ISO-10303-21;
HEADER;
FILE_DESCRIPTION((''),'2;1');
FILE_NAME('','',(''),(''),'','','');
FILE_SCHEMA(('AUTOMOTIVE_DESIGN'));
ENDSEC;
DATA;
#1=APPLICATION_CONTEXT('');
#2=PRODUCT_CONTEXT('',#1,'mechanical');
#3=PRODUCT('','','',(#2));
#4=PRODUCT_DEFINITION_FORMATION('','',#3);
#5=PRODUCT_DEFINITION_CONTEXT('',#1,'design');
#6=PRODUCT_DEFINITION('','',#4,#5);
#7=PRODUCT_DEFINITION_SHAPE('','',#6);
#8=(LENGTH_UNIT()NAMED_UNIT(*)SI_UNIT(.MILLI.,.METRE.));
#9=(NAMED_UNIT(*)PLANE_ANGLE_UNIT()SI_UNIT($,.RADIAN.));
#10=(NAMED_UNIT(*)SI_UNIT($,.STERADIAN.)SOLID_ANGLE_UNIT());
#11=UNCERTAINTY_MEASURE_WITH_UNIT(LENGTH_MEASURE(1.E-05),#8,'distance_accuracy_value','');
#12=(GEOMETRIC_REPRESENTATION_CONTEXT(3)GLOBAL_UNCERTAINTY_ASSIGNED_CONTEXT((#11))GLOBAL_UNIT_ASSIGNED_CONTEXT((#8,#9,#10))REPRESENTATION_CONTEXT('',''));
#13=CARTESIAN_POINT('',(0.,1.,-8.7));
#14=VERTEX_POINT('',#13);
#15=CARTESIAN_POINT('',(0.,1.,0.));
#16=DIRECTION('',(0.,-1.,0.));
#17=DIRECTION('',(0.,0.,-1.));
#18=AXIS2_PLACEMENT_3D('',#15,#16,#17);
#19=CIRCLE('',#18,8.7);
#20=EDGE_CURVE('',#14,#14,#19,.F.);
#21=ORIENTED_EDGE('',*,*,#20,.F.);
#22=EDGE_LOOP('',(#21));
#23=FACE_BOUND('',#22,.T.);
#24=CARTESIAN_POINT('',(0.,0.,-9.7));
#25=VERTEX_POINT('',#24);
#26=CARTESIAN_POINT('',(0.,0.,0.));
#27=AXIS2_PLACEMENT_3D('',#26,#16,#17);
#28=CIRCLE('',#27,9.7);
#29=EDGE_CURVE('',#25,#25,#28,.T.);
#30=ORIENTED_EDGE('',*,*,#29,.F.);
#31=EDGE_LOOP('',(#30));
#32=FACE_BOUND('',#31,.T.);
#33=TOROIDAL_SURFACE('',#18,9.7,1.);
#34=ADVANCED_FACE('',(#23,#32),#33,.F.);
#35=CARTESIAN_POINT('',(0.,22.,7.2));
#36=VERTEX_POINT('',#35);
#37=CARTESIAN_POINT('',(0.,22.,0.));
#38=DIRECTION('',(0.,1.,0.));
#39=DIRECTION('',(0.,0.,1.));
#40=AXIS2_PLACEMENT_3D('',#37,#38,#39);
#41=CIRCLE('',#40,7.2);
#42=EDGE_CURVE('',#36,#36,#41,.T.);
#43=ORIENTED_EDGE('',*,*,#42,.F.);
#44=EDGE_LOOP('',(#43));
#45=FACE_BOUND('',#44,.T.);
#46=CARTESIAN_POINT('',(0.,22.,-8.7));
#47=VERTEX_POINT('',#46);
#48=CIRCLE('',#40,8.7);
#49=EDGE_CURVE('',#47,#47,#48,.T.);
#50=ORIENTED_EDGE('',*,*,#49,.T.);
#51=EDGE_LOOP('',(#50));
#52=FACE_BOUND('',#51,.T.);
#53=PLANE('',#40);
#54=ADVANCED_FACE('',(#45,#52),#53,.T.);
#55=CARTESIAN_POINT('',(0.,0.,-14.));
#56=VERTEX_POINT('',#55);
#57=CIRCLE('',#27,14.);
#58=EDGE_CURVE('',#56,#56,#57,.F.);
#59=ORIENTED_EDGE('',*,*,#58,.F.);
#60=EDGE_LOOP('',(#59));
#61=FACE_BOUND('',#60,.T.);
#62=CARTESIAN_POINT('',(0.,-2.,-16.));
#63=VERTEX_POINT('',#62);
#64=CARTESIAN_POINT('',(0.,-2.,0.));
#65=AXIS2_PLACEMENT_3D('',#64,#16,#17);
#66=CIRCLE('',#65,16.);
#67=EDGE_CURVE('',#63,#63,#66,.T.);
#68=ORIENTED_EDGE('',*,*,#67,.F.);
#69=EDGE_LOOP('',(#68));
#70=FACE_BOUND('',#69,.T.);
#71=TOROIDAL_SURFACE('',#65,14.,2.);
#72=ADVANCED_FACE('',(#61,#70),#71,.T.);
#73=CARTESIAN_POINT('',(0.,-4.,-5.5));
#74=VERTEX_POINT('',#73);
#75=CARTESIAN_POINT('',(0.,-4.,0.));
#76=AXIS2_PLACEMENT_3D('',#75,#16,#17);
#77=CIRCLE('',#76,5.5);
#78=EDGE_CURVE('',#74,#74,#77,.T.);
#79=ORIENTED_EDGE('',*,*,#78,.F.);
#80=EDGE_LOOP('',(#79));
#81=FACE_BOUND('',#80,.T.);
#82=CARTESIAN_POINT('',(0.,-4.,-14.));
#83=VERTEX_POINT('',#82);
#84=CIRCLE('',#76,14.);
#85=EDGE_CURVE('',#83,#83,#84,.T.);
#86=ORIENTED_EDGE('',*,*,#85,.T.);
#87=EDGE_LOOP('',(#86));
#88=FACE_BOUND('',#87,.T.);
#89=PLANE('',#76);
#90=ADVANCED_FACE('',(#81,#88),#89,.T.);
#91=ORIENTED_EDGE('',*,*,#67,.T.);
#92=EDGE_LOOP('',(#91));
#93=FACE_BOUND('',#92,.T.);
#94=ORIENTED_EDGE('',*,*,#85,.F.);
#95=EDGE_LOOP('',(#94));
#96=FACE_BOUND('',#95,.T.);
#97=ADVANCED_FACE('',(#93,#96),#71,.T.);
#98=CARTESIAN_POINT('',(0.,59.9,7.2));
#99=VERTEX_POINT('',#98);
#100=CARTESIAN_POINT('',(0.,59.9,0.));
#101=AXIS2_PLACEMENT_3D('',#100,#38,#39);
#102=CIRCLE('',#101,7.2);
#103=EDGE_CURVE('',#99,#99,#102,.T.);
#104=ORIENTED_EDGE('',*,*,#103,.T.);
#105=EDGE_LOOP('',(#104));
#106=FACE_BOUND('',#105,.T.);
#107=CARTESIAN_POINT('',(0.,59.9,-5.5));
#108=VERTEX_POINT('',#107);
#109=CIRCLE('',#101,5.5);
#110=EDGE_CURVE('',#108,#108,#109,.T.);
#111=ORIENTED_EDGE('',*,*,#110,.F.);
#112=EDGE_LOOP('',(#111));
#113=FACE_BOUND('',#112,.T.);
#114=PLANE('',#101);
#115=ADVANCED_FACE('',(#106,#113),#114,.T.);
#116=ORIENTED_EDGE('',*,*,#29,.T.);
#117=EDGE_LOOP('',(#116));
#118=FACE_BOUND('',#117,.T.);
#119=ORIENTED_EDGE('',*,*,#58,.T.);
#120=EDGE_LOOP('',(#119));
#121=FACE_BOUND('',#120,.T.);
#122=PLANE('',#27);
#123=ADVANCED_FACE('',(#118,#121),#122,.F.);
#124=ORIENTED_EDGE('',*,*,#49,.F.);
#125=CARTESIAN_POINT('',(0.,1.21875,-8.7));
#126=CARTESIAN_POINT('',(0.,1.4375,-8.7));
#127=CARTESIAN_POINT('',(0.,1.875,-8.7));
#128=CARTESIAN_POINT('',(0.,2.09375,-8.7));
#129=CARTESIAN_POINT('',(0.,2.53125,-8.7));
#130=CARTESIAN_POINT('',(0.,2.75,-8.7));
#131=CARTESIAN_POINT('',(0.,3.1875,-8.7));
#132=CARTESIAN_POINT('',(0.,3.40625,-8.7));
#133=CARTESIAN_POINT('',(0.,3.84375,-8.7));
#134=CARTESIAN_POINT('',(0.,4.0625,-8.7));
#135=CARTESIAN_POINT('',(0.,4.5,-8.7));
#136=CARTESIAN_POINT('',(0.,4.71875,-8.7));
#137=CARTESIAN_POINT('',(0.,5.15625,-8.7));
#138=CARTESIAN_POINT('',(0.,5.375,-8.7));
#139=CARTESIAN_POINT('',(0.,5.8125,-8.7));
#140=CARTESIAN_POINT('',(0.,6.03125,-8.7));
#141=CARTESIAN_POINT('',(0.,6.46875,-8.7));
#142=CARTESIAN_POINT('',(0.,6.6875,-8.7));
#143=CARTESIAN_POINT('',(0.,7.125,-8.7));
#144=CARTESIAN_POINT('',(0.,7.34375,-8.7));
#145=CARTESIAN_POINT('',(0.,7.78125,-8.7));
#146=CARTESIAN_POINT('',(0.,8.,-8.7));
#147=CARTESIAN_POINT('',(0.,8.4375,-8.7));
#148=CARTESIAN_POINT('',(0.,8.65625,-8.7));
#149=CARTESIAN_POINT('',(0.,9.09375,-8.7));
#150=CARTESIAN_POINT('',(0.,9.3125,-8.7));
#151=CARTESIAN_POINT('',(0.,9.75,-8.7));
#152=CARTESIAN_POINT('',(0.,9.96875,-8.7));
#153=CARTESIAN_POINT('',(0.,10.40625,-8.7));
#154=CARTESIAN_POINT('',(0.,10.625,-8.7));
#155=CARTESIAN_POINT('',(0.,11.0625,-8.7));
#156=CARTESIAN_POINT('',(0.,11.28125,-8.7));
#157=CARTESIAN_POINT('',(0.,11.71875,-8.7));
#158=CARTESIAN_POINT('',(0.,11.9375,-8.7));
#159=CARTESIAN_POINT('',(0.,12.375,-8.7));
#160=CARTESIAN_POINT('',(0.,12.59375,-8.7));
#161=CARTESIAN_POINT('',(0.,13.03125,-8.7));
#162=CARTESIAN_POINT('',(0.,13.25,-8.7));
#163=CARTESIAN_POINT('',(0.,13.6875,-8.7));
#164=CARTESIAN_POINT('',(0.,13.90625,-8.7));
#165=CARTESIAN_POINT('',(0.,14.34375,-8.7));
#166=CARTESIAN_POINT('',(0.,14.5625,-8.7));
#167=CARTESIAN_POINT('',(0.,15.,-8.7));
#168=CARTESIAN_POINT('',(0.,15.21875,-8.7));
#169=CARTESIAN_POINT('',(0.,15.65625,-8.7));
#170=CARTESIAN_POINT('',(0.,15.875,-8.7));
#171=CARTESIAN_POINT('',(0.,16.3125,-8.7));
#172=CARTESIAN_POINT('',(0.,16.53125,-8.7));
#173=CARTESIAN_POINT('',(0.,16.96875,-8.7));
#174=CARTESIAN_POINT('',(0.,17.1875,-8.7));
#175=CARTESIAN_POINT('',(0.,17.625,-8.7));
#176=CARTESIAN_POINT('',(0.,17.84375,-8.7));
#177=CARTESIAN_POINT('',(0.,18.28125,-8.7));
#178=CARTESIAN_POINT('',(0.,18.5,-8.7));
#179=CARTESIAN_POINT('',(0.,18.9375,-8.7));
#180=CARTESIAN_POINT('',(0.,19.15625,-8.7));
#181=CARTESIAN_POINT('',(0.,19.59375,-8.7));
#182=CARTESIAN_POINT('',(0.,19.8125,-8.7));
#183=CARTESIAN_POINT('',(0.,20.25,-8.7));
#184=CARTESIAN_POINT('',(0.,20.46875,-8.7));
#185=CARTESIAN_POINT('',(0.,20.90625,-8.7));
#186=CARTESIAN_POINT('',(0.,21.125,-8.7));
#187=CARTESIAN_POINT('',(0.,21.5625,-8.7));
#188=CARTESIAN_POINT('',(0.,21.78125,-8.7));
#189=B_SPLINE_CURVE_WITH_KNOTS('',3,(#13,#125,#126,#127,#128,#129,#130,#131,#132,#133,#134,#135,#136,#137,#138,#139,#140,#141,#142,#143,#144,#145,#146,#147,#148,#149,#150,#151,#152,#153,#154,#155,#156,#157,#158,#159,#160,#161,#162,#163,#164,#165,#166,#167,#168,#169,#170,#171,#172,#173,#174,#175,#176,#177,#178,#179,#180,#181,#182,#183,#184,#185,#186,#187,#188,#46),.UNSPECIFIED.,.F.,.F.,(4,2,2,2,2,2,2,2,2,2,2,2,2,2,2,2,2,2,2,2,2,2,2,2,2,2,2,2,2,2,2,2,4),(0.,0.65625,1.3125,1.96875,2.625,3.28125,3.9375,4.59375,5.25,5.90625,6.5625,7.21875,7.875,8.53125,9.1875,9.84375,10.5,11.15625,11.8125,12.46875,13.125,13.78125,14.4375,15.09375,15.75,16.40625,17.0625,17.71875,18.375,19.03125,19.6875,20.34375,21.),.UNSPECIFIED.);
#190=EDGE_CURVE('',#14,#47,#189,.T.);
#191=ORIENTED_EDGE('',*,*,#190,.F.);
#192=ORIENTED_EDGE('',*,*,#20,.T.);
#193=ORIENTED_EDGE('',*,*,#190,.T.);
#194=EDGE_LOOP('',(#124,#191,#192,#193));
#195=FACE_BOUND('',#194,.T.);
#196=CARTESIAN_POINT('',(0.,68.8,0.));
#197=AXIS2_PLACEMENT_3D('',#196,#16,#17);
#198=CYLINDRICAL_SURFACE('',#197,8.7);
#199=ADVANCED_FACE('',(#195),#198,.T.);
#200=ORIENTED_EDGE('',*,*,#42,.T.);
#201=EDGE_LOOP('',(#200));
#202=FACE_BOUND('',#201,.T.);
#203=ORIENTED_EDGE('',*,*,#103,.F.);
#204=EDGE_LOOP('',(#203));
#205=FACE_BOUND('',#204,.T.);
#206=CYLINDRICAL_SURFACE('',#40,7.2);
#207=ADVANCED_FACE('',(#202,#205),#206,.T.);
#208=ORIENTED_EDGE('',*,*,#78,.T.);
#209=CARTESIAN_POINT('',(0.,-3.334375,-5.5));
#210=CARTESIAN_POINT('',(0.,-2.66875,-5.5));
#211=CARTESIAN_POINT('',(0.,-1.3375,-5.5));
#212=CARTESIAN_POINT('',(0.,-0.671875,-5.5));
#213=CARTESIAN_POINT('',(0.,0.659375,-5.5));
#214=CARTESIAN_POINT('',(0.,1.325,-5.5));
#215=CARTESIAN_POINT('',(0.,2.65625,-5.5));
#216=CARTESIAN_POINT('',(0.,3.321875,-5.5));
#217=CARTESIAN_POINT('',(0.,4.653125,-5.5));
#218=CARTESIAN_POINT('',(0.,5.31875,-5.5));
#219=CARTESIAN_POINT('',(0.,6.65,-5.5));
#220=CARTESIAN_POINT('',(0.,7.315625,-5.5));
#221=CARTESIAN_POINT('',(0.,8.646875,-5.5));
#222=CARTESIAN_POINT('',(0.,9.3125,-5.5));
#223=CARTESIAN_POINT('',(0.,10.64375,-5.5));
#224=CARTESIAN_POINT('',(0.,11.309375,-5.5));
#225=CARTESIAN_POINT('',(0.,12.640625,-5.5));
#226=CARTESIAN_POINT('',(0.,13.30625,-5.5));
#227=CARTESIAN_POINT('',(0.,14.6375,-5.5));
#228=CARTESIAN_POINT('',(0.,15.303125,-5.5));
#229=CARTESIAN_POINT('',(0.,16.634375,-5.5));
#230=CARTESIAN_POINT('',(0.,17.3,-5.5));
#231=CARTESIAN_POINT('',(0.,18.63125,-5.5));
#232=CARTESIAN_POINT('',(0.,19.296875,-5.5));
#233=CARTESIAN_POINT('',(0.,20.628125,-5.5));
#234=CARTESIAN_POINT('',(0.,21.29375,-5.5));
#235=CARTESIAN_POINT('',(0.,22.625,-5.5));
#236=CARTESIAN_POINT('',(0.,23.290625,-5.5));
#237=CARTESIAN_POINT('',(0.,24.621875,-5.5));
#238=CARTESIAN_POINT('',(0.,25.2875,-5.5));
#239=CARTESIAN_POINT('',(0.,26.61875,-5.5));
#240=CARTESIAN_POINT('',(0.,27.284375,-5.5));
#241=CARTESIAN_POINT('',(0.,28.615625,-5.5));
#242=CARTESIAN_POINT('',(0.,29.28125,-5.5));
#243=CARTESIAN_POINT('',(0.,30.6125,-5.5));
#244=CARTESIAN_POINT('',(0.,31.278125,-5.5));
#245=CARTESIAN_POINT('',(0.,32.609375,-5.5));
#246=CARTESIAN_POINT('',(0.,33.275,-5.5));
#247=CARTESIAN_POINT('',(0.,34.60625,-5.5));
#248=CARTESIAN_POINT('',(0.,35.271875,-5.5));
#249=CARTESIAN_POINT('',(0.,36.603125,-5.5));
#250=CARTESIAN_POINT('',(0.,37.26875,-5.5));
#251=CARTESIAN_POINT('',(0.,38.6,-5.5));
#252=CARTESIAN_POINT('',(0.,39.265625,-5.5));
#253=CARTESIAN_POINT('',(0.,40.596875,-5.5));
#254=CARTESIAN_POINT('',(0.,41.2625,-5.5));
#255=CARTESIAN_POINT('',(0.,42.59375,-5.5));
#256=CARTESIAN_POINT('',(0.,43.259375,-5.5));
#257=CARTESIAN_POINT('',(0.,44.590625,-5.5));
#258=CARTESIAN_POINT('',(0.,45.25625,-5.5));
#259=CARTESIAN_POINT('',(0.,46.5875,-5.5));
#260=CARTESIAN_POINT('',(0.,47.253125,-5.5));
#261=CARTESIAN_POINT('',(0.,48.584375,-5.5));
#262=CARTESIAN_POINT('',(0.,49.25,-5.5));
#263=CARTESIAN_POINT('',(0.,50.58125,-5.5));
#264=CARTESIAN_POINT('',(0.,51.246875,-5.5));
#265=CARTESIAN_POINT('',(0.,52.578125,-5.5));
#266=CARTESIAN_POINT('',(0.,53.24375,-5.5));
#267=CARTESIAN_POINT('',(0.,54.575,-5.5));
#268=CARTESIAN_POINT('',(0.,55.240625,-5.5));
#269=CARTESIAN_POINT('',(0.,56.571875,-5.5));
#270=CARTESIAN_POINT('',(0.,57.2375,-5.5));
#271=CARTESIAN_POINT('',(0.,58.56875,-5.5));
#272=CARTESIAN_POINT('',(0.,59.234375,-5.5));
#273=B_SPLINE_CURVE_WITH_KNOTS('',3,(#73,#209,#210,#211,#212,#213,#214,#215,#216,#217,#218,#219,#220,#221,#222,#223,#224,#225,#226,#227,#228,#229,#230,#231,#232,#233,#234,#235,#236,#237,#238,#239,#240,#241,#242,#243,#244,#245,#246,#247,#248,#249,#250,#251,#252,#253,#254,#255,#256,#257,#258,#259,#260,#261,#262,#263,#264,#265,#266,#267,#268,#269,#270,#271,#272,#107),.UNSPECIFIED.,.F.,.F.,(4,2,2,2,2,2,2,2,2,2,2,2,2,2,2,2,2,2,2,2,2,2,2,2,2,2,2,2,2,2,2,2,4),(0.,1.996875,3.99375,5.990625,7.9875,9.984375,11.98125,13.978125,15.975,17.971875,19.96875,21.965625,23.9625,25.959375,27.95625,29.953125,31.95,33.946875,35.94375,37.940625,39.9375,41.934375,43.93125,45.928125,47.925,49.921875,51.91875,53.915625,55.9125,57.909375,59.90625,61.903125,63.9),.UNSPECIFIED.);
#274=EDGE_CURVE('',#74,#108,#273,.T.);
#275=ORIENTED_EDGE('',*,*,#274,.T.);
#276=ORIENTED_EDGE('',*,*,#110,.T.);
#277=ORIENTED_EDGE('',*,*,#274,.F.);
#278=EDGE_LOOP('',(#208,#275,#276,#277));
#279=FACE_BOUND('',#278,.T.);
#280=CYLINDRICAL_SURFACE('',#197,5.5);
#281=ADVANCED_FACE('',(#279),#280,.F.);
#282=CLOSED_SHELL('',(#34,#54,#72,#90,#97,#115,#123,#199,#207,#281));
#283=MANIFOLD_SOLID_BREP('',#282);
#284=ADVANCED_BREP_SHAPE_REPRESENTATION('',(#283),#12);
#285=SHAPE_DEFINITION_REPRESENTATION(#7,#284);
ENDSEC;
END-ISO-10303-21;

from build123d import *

# Parameters (mm, degrees)
SKETCH1_R           = 8.7
SKETCH1_R_2         = 5.5
BOSS_EXTRUDE1_DEPTH = 68.8
BOSS_EXTRUDE2_START = 4
SKETCH2_R           = 16
SKETCH2_R_2         = 5.5
BOSS_EXTRUDE2_DEPTH = 4
FILLET1_R           = 2
FILLET2_R           = 1
BOSS_EXTRUDE6_START = -10
BOSS_EXTRUDE6_DEPTH = 10
CUT_EXTRUDE1_START  = -23
SKETCH10_R          = 8.7
SKETCH10_R_2        = 7.2
CUT_EXTRUDE1_DEPTH  = 23
SKETCH11_R          = 17.428070689
CUT_EXTRUDE2_DEPTH  = 54.972215104
SKETCH12_R          = 7.2
SKETCH12_R_2        = 5.5
BOSS_EXTRUDE7_DEPTH = 14.9


with BuildPart() as part:
    # Sketch1 → Boss-Extrude1 (new body)
    with BuildSketch(Plane(origin=(0, 0, 0), x_dir=(1, 0, 0), z_dir=(0, 1, 0))):
        with Locations(Location((0, 0, 0), (0, 0, 90))):
            Circle(SKETCH1_R)
        with Locations(Location((0, 0, 0), (0, 0, 90))):
            Circle(SKETCH1_R_2, mode=Mode.SUBTRACT)
    extrude(amount=BOSS_EXTRUDE1_DEPTH)

    # Sketch2 → Boss-Extrude2 (add)
    with BuildSketch(Plane.XZ.offset(BOSS_EXTRUDE2_START)):
        with Locations(Location((0, 0, 0), (0, 0, 270))):
            Circle(SKETCH2_R)
        with Locations(Location((0, 0, 0), (0, 0, 270))):
            Circle(SKETCH2_R_2, mode=Mode.SUBTRACT)
    extrude(amount=-BOSS_EXTRUDE2_DEPTH)

    # Fillet1
    fillet1_edges = [part.edges().sort_by_distance(p)[0] for p in [
        (0, 0, 16),
        (0, -4, 16),
    ]]
    fillet(fillet1_edges, radius=FILLET1_R - 0.0001)  # a hair under: the kernel refuses the full size

    # Fillet2
    fillet2_edges = [part.edges().sort_by_distance(p)[0] for p in [
        (0, 0, 8.7),
    ]]
    fillet(fillet2_edges, radius=FILLET2_R)

    # Sketch7 → Boss-Extrude6 (add)
    with BuildSketch(Plane(origin=(0, 68.8, 0), x_dir=(1, 0, 0), z_dir=(0, 1, 0)).offset(BOSS_EXTRUDE6_START)):
        with BuildLine():
            Line((-8.459778344, -2.030307951), (-9.805994948, -2.807572454))
            ThreePointArc((-9.805994948, -2.807572454), (-8.832386986, -5.101856537), (-7.331446138, -7.091537035))
            Line((-7.331446138, -7.091537035), (-5.988187435, -6.311228981))
            ThreePointArc((-5.988187435, -6.311228981), (-7.534421013, -4.35), (-8.459778344, -2.030307951))
        make_face()
        with BuildLine():
            Line((-2.471590909, 8.341536931), (-2.475728155, 9.89498712))
            ThreePointArc((-2.475728155, 9.89498712), (0, 10.2), (2.475728155, 9.89498712))
            Line((2.475728155, 9.89498712), (2.471590909, 8.341536931))
            ThreePointArc((2.471590909, 8.341536931), (0, 8.7), (-2.471590909, 8.341536931))
        make_face()
        with BuildLine():
            Line((8.459778344, -2.030307951), (9.807174294, -2.803450085))
            ThreePointArc((9.807174294, -2.803450085), (8.833459119, -5.1), (7.331446138, -7.091537035))
            Line((7.331446138, -7.091537035), (5.988187435, -6.311228981))
            ThreePointArc((5.988187435, -6.311228981), (7.534421013, -4.35), (8.459778344, -2.030307951))
        make_face()
    extrude(amount=BOSS_EXTRUDE6_DEPTH)

    # Sketch10 → Cut-Extrude1 (cut)
    with BuildSketch(Plane(origin=(0, 45, 0), x_dir=(1, 0, 0), z_dir=(0, 1, 0)).offset(CUT_EXTRUDE1_START)):
        with Locations(Location((0, 0, 0), (0, 0, 90))):
            Circle(SKETCH10_R)
        with Locations(Location((0, 0, 0), (0, 0, 270))):
            Circle(SKETCH10_R_2, mode=Mode.SUBTRACT)
    extrude(amount=CUT_EXTRUDE1_DEPTH, mode=Mode.SUBTRACT)

    # Sketch11 → Cut-Extrude2 (cut, through all)
    with BuildSketch(Plane.XZ.offset(-45)):
        Circle(SKETCH11_R)
    extrude(amount=-CUT_EXTRUDE2_DEPTH, mode=Mode.SUBTRACT)

    # Sketch12 → Boss-Extrude7 (add)
    with BuildSketch(Plane(origin=(0, 45, 0), x_dir=(1, 0, 0), z_dir=(0, 1, 0))):
        with Locations(Location((0, 0, 0), (0, 0, 270))):
            Circle(SKETCH12_R)
        with Locations(Location((0, 0, 0), (0, 0, 90))):
            Circle(SKETCH12_R_2, mode=Mode.SUBTRACT)
    extrude(amount=BOSS_EXTRUDE7_DEPTH)


solid = part.part
